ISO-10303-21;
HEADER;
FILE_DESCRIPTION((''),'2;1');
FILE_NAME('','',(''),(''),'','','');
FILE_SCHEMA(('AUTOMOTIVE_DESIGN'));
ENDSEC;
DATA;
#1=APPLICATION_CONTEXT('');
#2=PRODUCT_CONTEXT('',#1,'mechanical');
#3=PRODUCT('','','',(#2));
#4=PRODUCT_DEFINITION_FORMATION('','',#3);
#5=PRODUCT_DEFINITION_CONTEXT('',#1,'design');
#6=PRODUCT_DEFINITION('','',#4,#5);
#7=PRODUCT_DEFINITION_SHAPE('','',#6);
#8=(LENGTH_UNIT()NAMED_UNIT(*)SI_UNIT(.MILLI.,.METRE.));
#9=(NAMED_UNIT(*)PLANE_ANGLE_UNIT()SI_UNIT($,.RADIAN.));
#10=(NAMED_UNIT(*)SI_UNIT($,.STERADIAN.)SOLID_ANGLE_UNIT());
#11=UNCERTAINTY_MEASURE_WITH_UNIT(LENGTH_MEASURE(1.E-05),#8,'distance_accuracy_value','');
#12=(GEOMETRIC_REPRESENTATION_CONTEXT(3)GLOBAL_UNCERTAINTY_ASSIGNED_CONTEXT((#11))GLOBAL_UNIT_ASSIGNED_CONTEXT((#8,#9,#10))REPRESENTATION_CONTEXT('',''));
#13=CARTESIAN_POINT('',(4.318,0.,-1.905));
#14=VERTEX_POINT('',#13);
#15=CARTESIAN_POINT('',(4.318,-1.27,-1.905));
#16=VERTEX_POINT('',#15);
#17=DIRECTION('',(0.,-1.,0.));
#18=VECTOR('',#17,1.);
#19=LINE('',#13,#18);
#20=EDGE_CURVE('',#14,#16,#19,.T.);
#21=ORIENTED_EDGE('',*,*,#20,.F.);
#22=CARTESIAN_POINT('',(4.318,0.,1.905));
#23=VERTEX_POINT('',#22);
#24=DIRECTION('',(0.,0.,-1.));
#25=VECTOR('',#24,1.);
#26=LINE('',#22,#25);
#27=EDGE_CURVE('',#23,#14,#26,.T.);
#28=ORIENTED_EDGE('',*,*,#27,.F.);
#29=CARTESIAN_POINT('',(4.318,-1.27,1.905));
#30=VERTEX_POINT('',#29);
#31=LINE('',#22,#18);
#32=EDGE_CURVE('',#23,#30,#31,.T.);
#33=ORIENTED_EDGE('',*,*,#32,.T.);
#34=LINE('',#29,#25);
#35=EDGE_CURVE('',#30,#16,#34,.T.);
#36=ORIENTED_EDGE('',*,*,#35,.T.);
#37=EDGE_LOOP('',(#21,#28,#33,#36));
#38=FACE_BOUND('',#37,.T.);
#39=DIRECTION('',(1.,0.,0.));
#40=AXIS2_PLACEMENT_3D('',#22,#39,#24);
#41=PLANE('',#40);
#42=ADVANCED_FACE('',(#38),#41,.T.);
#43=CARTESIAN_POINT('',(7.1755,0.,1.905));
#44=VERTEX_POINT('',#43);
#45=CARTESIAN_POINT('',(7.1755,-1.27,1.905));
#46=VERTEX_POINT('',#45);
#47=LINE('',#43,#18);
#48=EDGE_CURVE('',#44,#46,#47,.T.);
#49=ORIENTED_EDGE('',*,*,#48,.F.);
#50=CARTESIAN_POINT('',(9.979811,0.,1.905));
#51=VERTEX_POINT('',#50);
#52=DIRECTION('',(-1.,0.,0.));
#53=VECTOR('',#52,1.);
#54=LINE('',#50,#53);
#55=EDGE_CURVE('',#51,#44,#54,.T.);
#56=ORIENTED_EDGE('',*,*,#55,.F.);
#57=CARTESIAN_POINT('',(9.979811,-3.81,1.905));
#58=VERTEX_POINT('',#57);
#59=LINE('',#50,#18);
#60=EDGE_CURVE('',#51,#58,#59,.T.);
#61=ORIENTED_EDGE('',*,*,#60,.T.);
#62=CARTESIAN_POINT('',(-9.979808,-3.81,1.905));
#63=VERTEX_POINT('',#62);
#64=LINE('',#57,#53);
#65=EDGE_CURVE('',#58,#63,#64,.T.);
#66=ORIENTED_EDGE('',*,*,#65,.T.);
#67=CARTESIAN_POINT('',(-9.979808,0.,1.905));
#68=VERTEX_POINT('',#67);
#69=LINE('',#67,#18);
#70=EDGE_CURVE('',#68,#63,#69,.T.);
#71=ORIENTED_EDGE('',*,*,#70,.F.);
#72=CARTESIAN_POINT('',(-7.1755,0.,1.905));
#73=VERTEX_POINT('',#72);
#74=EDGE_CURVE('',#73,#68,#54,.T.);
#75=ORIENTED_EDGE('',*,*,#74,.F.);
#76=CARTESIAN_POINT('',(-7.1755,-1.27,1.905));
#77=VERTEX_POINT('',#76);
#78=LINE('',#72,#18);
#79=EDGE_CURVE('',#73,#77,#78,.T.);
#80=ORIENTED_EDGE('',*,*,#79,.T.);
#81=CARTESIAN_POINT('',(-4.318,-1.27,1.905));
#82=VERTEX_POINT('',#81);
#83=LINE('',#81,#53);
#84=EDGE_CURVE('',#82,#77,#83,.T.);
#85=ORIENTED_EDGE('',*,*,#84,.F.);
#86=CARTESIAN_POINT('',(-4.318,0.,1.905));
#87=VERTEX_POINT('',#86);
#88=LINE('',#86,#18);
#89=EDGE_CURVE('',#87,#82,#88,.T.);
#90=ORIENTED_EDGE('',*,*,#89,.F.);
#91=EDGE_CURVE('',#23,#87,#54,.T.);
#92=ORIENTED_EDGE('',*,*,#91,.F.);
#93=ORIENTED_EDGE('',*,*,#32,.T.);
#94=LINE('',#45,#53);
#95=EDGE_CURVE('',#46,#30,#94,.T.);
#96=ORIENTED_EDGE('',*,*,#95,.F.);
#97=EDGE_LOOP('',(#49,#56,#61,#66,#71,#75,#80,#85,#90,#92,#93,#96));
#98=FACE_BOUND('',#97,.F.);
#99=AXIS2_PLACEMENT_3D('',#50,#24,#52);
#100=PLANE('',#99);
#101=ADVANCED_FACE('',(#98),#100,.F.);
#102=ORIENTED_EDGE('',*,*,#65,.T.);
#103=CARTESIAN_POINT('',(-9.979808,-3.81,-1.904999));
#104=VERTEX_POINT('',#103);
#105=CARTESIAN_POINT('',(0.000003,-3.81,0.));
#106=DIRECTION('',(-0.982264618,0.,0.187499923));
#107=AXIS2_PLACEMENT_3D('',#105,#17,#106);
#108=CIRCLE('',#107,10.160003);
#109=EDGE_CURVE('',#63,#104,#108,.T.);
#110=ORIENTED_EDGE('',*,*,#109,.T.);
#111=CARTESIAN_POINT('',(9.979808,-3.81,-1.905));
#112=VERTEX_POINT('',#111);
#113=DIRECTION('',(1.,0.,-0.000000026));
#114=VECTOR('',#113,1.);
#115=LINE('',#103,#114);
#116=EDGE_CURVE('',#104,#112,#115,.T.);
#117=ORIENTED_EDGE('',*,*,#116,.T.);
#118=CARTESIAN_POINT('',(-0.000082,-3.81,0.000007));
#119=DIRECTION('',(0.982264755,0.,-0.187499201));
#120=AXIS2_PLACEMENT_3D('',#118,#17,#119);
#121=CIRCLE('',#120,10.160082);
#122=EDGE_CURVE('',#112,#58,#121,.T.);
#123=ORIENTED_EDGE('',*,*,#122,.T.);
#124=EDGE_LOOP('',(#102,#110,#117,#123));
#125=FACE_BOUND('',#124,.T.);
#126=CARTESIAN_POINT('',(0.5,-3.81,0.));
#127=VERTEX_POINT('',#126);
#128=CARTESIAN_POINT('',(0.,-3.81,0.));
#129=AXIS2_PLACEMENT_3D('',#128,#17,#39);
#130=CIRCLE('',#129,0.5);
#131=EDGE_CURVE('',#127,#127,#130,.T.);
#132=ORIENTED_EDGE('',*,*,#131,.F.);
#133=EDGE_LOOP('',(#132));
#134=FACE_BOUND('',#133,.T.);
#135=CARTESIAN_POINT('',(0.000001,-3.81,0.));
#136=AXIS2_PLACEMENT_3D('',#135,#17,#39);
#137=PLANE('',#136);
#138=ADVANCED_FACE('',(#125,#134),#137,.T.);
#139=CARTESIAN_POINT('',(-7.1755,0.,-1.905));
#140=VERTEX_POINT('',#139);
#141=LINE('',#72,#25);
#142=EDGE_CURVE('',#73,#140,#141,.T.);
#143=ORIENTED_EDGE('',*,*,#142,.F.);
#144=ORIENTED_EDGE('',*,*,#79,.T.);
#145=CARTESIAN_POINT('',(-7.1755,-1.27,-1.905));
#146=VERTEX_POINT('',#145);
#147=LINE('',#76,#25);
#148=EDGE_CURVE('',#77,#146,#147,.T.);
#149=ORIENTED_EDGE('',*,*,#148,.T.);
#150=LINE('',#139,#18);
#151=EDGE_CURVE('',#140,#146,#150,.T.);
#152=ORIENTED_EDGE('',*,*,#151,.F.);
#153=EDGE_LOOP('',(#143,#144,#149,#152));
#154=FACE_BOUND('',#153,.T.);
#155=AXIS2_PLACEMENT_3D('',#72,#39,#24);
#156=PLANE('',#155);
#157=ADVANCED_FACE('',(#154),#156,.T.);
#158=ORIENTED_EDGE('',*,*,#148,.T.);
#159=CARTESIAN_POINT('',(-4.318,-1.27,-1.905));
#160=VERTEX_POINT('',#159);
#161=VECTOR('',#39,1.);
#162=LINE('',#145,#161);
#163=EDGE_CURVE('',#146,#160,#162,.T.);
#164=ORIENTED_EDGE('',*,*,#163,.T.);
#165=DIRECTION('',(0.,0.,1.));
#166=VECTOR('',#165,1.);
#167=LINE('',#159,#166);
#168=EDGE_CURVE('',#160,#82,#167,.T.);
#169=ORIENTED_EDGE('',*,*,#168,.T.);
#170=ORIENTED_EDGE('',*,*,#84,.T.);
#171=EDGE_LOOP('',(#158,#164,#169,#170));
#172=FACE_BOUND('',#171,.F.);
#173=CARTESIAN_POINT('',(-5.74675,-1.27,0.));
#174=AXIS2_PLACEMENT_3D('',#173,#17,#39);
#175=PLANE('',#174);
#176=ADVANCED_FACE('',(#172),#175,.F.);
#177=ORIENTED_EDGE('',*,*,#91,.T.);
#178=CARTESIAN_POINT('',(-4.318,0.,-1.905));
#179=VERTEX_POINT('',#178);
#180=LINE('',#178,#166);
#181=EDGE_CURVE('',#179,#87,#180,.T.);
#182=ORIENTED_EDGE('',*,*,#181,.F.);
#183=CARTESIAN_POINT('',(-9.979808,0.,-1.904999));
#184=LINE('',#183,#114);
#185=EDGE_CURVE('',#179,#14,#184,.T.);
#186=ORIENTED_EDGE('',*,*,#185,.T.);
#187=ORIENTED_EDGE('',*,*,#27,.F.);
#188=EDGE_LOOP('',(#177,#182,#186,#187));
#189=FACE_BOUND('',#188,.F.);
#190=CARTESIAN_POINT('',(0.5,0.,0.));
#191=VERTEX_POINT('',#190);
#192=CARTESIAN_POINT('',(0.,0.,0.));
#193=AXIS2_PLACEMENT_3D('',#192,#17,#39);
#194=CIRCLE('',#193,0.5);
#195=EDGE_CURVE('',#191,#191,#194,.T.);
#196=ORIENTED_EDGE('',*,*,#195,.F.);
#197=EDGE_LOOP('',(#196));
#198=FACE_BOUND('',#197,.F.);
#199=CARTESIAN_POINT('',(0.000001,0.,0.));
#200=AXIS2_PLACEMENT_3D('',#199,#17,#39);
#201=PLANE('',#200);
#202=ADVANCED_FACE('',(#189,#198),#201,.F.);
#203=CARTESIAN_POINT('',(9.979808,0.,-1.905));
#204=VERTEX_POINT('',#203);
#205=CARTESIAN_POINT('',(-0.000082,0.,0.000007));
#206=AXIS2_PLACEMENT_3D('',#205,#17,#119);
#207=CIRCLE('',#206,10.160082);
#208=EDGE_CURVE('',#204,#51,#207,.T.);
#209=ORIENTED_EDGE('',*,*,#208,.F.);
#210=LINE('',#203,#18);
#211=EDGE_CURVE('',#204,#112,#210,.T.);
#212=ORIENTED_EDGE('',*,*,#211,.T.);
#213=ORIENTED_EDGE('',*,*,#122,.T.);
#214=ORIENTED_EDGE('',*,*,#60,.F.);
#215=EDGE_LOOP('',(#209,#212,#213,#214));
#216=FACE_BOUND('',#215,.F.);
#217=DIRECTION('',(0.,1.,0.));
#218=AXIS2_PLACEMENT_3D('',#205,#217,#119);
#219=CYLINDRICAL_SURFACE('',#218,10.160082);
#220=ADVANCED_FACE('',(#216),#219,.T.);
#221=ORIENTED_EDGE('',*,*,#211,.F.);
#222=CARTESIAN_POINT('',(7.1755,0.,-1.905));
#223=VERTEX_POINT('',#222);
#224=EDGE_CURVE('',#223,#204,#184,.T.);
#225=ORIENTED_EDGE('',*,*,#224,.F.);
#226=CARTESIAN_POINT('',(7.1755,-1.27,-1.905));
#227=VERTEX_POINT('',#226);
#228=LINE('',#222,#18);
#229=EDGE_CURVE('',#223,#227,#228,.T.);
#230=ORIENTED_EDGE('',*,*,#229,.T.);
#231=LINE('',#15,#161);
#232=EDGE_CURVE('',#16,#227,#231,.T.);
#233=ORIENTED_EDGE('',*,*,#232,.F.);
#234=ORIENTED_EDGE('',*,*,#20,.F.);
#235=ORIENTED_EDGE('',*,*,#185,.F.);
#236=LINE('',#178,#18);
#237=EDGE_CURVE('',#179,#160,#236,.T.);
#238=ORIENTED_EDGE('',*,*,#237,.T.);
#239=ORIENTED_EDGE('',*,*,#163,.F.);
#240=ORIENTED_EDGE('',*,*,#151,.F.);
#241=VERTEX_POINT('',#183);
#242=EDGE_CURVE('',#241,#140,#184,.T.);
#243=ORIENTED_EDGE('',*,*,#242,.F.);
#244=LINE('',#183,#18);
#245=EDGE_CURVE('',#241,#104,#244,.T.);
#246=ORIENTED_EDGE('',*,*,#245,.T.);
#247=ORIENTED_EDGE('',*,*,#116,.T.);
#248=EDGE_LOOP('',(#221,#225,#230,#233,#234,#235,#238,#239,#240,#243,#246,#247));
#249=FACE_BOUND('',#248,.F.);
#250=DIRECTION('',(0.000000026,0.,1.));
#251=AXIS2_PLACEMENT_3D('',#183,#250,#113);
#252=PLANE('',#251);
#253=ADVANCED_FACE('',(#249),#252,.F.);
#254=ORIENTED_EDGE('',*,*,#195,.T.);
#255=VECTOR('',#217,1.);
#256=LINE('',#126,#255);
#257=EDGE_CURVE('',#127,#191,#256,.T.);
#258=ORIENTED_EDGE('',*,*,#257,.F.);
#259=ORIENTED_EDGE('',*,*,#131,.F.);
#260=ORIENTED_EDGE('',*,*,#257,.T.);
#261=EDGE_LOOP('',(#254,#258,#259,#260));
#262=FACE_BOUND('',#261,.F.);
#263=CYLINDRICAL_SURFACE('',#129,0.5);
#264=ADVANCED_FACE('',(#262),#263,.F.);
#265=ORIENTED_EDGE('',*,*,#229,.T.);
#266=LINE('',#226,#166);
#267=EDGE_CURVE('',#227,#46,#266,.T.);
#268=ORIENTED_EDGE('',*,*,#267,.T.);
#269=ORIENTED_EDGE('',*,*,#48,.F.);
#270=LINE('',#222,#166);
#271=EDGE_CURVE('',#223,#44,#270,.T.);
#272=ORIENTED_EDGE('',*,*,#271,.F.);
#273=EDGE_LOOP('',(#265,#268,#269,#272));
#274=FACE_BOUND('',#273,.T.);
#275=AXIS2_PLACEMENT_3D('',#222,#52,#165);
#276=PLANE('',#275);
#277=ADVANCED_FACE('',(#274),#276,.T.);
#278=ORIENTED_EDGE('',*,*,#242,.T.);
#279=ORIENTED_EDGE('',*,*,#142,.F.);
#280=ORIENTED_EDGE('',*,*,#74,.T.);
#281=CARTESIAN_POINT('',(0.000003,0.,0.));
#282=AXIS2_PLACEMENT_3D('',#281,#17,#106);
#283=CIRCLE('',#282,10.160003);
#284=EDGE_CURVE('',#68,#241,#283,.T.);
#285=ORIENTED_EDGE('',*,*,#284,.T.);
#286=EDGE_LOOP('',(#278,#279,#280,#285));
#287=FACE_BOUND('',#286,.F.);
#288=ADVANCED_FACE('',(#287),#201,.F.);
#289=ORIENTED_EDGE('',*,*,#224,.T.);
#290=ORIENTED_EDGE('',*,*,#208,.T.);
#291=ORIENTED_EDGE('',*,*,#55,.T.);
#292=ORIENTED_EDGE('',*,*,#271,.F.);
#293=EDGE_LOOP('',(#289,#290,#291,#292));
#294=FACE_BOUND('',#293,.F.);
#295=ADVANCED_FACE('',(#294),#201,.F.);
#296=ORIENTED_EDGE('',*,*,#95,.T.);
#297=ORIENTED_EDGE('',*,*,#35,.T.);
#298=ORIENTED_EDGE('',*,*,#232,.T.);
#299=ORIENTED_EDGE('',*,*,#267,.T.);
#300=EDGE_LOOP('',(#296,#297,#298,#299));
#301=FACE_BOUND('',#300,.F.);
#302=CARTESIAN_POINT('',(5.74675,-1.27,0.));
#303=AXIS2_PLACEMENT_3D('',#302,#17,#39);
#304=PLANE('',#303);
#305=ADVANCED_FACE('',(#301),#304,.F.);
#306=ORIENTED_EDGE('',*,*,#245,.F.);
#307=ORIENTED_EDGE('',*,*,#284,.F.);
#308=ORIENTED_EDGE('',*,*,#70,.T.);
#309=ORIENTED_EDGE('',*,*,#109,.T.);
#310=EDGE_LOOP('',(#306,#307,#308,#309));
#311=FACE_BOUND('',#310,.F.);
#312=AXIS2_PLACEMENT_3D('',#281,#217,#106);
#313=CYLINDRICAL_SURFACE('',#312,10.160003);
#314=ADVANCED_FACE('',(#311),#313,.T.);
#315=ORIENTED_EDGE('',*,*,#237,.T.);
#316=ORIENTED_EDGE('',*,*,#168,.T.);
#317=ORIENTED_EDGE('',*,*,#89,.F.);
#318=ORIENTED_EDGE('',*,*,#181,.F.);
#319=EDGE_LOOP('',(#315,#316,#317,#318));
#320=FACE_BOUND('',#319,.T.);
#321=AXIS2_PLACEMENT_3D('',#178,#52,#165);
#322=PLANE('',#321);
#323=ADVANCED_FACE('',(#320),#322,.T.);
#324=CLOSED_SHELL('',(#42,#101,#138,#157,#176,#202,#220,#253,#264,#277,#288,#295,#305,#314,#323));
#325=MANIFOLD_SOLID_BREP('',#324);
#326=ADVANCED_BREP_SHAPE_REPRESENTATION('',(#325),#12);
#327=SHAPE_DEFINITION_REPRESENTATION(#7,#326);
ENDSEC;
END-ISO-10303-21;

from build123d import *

# Parameters (mm, degrees)
F1_DEPTH = 3.81
F2_R     = 0.5
F3_DEPTH = 25.4
F5_DEPTH = 1.27


# Not quite as in the source:
# - ends of sketch curves that miss each other by under 0.0002 mm in the source are joined


with BuildPart() as f1:
    # F0 (on Front) → F1 (new body)
    with BuildSketch(Plane.XZ):
        with BuildLine():
            Line((9.9798112172, 1.905), (-9.9798084652, 1.905))
            ThreePointArc((-9.9798084652, 1.905), (-10.16, 0), (-9.9798084652, -1.9049994747))
            Line((-9.9798084652, -1.9049994747), (9.9798084652, -1.905))
            ThreePointArc((9.9798084652, -1.905), (10.16, 0), (9.9798112172, 1.905))
        make_face()
    extrude(amount=F1_DEPTH)

    # F2 (on face) → F3 (cut)
    with BuildSketch(Plane.XZ.offset(3.81)):
        Circle(F2_R)
    extrude(amount=-F3_DEPTH, mode=Mode.SUBTRACT)

    # F4 (on face) → F5 (cut)
    with BuildSketch(Plane.XZ):
        Polygon((7.1755, 1.905), (4.318, 1.905), (4.318, -0.0512809254), (4.318, -1.905), (7.1755, -1.905), align=None)
        Polygon((-4.318, 0), (-4.318, 1.905), (-7.1755, 1.905), (-7.1755, -1.905), (-4.318, -1.905), align=None)
    extrude(amount=F5_DEPTH, mode=Mode.SUBTRACT)


solid = f1.part
